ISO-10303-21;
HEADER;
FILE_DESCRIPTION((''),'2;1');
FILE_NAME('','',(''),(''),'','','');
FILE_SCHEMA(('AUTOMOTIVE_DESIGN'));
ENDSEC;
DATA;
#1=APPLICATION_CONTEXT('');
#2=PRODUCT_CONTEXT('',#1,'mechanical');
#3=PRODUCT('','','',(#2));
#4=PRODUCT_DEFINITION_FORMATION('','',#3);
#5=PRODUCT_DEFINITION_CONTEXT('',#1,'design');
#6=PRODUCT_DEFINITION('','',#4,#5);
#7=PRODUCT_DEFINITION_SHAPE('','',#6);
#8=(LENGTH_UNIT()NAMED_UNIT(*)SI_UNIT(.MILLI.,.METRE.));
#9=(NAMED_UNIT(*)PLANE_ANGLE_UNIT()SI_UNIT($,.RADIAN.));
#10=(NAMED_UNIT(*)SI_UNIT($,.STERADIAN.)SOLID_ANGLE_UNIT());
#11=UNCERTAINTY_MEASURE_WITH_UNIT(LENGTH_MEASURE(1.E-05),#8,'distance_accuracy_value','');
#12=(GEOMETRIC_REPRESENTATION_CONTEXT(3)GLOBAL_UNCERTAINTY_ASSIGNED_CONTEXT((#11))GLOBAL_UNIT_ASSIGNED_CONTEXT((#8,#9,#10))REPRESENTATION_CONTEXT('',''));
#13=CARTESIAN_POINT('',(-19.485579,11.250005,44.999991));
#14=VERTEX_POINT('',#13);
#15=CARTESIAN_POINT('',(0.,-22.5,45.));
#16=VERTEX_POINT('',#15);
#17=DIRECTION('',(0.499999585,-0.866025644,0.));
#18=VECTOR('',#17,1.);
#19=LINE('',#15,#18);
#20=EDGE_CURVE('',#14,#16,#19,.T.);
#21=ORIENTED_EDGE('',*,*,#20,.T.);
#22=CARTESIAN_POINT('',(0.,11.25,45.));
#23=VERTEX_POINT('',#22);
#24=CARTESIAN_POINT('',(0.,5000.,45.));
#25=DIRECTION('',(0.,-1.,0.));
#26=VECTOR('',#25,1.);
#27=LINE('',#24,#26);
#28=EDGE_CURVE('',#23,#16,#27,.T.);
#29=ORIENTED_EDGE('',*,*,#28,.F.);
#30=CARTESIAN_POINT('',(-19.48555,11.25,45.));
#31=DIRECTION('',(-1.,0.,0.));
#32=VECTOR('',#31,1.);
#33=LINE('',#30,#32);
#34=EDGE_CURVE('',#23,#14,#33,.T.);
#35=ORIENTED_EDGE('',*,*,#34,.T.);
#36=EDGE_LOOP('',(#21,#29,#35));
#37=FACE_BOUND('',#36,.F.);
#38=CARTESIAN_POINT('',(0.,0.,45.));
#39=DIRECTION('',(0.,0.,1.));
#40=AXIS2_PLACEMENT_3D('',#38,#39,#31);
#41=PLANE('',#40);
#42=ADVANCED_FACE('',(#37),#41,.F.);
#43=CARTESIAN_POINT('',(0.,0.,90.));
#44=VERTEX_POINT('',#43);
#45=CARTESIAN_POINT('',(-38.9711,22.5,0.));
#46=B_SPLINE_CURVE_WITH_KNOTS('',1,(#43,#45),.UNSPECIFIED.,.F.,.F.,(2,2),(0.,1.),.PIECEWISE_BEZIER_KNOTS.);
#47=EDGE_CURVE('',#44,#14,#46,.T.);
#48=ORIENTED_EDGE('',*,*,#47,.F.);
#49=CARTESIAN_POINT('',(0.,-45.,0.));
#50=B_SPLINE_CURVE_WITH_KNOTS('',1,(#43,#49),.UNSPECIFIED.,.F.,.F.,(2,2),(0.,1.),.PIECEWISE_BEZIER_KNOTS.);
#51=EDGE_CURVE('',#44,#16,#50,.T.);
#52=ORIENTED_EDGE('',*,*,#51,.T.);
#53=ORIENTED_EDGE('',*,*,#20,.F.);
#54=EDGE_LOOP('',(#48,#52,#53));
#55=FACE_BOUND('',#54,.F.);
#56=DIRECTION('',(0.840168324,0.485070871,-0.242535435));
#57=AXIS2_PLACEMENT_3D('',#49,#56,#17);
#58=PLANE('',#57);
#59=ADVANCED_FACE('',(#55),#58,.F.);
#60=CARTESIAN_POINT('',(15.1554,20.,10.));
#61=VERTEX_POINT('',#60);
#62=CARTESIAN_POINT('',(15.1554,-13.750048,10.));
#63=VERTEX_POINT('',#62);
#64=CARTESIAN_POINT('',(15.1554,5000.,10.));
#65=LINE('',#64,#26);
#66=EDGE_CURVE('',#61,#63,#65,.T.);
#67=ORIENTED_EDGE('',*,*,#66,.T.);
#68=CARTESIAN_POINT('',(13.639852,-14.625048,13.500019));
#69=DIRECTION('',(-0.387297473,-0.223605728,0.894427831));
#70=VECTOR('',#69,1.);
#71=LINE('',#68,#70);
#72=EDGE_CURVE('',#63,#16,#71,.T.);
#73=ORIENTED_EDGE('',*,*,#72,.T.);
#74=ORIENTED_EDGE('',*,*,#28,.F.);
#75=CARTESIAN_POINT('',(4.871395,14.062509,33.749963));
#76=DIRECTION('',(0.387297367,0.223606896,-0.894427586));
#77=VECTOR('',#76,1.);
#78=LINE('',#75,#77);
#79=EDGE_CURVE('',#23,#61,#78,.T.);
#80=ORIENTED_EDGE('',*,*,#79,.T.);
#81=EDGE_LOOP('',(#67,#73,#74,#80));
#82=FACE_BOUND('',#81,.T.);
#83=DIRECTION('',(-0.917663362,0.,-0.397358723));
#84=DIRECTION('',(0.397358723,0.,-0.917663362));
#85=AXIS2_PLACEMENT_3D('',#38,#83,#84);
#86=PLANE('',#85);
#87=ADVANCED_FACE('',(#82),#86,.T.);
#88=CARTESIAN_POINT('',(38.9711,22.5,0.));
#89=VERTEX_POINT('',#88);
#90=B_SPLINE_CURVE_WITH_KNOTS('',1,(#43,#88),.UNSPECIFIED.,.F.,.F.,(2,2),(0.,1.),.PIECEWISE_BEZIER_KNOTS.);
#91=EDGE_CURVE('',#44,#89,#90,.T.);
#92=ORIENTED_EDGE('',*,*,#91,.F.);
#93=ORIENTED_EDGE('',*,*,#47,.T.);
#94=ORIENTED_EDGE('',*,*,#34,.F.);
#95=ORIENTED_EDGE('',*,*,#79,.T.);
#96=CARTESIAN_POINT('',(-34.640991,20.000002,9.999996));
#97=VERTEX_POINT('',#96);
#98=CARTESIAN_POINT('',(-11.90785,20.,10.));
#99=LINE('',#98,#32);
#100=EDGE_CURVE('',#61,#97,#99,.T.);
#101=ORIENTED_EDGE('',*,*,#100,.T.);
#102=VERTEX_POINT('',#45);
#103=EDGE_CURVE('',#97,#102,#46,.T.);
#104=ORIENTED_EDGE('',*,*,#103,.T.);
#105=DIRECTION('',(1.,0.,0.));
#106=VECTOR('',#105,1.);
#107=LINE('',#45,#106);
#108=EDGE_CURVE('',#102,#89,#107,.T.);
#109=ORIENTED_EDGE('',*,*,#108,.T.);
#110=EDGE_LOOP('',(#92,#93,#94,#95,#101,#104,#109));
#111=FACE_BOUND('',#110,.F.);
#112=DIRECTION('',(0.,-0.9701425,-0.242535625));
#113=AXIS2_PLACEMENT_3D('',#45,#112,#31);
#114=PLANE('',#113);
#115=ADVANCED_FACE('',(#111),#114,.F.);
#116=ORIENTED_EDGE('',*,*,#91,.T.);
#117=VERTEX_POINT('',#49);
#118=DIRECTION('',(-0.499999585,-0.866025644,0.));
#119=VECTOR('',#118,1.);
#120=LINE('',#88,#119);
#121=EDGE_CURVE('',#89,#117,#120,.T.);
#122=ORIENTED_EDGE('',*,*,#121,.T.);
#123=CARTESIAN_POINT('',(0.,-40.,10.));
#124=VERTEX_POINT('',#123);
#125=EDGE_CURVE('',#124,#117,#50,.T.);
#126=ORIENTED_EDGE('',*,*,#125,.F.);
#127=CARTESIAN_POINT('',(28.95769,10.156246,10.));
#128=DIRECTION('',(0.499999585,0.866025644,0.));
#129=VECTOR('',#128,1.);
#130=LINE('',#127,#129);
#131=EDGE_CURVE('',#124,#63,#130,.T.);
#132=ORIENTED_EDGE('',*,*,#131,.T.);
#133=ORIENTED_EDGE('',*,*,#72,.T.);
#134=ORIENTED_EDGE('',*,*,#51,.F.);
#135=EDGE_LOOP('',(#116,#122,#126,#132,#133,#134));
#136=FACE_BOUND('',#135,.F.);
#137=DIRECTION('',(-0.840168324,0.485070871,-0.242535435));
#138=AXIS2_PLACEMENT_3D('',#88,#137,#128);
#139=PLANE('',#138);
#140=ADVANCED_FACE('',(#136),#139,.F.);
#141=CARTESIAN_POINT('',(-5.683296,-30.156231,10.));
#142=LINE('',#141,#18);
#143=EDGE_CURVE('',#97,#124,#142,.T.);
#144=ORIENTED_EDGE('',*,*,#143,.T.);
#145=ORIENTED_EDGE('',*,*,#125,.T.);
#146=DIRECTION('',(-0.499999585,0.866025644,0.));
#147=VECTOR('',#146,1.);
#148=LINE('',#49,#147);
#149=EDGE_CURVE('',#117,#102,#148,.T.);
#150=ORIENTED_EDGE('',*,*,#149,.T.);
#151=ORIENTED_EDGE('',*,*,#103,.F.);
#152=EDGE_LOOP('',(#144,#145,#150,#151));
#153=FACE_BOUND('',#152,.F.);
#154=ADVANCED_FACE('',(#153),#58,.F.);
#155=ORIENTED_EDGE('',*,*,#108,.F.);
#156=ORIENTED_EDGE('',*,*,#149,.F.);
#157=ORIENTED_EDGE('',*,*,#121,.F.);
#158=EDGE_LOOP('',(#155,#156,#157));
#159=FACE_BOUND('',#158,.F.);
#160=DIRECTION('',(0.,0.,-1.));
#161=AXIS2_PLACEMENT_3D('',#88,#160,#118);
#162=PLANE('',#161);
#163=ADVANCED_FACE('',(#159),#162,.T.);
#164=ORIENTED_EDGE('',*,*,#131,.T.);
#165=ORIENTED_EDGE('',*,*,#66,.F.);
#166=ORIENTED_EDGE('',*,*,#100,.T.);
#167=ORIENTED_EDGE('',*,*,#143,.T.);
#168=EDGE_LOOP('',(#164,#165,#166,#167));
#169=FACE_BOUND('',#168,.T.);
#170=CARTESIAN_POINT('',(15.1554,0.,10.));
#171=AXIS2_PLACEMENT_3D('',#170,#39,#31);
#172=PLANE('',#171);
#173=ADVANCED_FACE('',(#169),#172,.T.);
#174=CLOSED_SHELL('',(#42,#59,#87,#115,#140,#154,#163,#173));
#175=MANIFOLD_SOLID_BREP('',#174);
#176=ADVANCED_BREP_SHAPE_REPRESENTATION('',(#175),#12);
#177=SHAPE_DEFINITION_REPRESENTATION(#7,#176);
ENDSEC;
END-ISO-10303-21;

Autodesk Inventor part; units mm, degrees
ref_plane "YZ Plane" through (0, 0, 0) normal (1, 0, 0) x (0, 1, 0)
ref_plane "XZ Plane" through (0, 0, 0) normal (0, 1, 0) x (-1, 0, 0)
sketch "Эскиз1" plane through (0, 0, 0) normal (0, 0, 1) x (1, 0, 0)
  circle A0 centre (0, 0) radius 45
  line L0 (0, -45) -> (-38.9711, 22.5)
  line L1 (-38.9711, 22.5) -> (38.9711, 22.5)
  line L2 (38.9711, 22.5) -> (0, -45)
  dimension "d0" = 90
ref_plane "РабПлоскость1" through (0, 0, 90) normal (0, 0, 1) x (1, 0, 0)
sketch "Эскиз5" plane through (0, 0, 0) normal (0, 1, 0) x (-1, 0, 0)
  point P0 (0, 0)
sketch "Эскиз6" plane through (0, 0, 0) normal (1, 0, 0) x (0, 1, 0)
  point P0 (0, 0)
sketch "Эскиз7" plane through (0, 0, 0) normal (0, 1, 0) x (-1, 0, 0)
  point P0 (0, 0)
sketch "Эскиз8" plane through (0, 0, 90) normal (0, 0, 1) x (1, 0, 0)
  point P0 (0, 0)
loft "Лофт2" add profiles "Эскиз1" section 1 point at (0, 0, 90) contours L2 L0 L1
sketch "Эскиз9" plane through (0, 0, 0) normal (0, 1, 0) x (-1, 0, 0)
  point P0 (0, 0)
sketch "Эскиз10" plane through (0, 0, 0) normal (0, 1, 0) x (-1, 0, 0)
  line L0 (0, 10) -> (34.641, 10)
  line L1 (0, 90) -> (38.9711, 0) projected
  line L2 (0, 45) -> (19.4856, 45)
  line L3 (0, 45) -> (-15.1554, 10)
  line L4 (0, 90) -> (-38.9711, 0) projected
  line L5 (-15.1554, 10) -> (0, 10)
  line L6 (19.4856, 45) -> (34.641, 10)
  point P0 (0, 0)
extrude "Выдавливание1" cut sketch "Эскиз10" along normal mid plane 10000
properties part number "Деталь2Инди1"
